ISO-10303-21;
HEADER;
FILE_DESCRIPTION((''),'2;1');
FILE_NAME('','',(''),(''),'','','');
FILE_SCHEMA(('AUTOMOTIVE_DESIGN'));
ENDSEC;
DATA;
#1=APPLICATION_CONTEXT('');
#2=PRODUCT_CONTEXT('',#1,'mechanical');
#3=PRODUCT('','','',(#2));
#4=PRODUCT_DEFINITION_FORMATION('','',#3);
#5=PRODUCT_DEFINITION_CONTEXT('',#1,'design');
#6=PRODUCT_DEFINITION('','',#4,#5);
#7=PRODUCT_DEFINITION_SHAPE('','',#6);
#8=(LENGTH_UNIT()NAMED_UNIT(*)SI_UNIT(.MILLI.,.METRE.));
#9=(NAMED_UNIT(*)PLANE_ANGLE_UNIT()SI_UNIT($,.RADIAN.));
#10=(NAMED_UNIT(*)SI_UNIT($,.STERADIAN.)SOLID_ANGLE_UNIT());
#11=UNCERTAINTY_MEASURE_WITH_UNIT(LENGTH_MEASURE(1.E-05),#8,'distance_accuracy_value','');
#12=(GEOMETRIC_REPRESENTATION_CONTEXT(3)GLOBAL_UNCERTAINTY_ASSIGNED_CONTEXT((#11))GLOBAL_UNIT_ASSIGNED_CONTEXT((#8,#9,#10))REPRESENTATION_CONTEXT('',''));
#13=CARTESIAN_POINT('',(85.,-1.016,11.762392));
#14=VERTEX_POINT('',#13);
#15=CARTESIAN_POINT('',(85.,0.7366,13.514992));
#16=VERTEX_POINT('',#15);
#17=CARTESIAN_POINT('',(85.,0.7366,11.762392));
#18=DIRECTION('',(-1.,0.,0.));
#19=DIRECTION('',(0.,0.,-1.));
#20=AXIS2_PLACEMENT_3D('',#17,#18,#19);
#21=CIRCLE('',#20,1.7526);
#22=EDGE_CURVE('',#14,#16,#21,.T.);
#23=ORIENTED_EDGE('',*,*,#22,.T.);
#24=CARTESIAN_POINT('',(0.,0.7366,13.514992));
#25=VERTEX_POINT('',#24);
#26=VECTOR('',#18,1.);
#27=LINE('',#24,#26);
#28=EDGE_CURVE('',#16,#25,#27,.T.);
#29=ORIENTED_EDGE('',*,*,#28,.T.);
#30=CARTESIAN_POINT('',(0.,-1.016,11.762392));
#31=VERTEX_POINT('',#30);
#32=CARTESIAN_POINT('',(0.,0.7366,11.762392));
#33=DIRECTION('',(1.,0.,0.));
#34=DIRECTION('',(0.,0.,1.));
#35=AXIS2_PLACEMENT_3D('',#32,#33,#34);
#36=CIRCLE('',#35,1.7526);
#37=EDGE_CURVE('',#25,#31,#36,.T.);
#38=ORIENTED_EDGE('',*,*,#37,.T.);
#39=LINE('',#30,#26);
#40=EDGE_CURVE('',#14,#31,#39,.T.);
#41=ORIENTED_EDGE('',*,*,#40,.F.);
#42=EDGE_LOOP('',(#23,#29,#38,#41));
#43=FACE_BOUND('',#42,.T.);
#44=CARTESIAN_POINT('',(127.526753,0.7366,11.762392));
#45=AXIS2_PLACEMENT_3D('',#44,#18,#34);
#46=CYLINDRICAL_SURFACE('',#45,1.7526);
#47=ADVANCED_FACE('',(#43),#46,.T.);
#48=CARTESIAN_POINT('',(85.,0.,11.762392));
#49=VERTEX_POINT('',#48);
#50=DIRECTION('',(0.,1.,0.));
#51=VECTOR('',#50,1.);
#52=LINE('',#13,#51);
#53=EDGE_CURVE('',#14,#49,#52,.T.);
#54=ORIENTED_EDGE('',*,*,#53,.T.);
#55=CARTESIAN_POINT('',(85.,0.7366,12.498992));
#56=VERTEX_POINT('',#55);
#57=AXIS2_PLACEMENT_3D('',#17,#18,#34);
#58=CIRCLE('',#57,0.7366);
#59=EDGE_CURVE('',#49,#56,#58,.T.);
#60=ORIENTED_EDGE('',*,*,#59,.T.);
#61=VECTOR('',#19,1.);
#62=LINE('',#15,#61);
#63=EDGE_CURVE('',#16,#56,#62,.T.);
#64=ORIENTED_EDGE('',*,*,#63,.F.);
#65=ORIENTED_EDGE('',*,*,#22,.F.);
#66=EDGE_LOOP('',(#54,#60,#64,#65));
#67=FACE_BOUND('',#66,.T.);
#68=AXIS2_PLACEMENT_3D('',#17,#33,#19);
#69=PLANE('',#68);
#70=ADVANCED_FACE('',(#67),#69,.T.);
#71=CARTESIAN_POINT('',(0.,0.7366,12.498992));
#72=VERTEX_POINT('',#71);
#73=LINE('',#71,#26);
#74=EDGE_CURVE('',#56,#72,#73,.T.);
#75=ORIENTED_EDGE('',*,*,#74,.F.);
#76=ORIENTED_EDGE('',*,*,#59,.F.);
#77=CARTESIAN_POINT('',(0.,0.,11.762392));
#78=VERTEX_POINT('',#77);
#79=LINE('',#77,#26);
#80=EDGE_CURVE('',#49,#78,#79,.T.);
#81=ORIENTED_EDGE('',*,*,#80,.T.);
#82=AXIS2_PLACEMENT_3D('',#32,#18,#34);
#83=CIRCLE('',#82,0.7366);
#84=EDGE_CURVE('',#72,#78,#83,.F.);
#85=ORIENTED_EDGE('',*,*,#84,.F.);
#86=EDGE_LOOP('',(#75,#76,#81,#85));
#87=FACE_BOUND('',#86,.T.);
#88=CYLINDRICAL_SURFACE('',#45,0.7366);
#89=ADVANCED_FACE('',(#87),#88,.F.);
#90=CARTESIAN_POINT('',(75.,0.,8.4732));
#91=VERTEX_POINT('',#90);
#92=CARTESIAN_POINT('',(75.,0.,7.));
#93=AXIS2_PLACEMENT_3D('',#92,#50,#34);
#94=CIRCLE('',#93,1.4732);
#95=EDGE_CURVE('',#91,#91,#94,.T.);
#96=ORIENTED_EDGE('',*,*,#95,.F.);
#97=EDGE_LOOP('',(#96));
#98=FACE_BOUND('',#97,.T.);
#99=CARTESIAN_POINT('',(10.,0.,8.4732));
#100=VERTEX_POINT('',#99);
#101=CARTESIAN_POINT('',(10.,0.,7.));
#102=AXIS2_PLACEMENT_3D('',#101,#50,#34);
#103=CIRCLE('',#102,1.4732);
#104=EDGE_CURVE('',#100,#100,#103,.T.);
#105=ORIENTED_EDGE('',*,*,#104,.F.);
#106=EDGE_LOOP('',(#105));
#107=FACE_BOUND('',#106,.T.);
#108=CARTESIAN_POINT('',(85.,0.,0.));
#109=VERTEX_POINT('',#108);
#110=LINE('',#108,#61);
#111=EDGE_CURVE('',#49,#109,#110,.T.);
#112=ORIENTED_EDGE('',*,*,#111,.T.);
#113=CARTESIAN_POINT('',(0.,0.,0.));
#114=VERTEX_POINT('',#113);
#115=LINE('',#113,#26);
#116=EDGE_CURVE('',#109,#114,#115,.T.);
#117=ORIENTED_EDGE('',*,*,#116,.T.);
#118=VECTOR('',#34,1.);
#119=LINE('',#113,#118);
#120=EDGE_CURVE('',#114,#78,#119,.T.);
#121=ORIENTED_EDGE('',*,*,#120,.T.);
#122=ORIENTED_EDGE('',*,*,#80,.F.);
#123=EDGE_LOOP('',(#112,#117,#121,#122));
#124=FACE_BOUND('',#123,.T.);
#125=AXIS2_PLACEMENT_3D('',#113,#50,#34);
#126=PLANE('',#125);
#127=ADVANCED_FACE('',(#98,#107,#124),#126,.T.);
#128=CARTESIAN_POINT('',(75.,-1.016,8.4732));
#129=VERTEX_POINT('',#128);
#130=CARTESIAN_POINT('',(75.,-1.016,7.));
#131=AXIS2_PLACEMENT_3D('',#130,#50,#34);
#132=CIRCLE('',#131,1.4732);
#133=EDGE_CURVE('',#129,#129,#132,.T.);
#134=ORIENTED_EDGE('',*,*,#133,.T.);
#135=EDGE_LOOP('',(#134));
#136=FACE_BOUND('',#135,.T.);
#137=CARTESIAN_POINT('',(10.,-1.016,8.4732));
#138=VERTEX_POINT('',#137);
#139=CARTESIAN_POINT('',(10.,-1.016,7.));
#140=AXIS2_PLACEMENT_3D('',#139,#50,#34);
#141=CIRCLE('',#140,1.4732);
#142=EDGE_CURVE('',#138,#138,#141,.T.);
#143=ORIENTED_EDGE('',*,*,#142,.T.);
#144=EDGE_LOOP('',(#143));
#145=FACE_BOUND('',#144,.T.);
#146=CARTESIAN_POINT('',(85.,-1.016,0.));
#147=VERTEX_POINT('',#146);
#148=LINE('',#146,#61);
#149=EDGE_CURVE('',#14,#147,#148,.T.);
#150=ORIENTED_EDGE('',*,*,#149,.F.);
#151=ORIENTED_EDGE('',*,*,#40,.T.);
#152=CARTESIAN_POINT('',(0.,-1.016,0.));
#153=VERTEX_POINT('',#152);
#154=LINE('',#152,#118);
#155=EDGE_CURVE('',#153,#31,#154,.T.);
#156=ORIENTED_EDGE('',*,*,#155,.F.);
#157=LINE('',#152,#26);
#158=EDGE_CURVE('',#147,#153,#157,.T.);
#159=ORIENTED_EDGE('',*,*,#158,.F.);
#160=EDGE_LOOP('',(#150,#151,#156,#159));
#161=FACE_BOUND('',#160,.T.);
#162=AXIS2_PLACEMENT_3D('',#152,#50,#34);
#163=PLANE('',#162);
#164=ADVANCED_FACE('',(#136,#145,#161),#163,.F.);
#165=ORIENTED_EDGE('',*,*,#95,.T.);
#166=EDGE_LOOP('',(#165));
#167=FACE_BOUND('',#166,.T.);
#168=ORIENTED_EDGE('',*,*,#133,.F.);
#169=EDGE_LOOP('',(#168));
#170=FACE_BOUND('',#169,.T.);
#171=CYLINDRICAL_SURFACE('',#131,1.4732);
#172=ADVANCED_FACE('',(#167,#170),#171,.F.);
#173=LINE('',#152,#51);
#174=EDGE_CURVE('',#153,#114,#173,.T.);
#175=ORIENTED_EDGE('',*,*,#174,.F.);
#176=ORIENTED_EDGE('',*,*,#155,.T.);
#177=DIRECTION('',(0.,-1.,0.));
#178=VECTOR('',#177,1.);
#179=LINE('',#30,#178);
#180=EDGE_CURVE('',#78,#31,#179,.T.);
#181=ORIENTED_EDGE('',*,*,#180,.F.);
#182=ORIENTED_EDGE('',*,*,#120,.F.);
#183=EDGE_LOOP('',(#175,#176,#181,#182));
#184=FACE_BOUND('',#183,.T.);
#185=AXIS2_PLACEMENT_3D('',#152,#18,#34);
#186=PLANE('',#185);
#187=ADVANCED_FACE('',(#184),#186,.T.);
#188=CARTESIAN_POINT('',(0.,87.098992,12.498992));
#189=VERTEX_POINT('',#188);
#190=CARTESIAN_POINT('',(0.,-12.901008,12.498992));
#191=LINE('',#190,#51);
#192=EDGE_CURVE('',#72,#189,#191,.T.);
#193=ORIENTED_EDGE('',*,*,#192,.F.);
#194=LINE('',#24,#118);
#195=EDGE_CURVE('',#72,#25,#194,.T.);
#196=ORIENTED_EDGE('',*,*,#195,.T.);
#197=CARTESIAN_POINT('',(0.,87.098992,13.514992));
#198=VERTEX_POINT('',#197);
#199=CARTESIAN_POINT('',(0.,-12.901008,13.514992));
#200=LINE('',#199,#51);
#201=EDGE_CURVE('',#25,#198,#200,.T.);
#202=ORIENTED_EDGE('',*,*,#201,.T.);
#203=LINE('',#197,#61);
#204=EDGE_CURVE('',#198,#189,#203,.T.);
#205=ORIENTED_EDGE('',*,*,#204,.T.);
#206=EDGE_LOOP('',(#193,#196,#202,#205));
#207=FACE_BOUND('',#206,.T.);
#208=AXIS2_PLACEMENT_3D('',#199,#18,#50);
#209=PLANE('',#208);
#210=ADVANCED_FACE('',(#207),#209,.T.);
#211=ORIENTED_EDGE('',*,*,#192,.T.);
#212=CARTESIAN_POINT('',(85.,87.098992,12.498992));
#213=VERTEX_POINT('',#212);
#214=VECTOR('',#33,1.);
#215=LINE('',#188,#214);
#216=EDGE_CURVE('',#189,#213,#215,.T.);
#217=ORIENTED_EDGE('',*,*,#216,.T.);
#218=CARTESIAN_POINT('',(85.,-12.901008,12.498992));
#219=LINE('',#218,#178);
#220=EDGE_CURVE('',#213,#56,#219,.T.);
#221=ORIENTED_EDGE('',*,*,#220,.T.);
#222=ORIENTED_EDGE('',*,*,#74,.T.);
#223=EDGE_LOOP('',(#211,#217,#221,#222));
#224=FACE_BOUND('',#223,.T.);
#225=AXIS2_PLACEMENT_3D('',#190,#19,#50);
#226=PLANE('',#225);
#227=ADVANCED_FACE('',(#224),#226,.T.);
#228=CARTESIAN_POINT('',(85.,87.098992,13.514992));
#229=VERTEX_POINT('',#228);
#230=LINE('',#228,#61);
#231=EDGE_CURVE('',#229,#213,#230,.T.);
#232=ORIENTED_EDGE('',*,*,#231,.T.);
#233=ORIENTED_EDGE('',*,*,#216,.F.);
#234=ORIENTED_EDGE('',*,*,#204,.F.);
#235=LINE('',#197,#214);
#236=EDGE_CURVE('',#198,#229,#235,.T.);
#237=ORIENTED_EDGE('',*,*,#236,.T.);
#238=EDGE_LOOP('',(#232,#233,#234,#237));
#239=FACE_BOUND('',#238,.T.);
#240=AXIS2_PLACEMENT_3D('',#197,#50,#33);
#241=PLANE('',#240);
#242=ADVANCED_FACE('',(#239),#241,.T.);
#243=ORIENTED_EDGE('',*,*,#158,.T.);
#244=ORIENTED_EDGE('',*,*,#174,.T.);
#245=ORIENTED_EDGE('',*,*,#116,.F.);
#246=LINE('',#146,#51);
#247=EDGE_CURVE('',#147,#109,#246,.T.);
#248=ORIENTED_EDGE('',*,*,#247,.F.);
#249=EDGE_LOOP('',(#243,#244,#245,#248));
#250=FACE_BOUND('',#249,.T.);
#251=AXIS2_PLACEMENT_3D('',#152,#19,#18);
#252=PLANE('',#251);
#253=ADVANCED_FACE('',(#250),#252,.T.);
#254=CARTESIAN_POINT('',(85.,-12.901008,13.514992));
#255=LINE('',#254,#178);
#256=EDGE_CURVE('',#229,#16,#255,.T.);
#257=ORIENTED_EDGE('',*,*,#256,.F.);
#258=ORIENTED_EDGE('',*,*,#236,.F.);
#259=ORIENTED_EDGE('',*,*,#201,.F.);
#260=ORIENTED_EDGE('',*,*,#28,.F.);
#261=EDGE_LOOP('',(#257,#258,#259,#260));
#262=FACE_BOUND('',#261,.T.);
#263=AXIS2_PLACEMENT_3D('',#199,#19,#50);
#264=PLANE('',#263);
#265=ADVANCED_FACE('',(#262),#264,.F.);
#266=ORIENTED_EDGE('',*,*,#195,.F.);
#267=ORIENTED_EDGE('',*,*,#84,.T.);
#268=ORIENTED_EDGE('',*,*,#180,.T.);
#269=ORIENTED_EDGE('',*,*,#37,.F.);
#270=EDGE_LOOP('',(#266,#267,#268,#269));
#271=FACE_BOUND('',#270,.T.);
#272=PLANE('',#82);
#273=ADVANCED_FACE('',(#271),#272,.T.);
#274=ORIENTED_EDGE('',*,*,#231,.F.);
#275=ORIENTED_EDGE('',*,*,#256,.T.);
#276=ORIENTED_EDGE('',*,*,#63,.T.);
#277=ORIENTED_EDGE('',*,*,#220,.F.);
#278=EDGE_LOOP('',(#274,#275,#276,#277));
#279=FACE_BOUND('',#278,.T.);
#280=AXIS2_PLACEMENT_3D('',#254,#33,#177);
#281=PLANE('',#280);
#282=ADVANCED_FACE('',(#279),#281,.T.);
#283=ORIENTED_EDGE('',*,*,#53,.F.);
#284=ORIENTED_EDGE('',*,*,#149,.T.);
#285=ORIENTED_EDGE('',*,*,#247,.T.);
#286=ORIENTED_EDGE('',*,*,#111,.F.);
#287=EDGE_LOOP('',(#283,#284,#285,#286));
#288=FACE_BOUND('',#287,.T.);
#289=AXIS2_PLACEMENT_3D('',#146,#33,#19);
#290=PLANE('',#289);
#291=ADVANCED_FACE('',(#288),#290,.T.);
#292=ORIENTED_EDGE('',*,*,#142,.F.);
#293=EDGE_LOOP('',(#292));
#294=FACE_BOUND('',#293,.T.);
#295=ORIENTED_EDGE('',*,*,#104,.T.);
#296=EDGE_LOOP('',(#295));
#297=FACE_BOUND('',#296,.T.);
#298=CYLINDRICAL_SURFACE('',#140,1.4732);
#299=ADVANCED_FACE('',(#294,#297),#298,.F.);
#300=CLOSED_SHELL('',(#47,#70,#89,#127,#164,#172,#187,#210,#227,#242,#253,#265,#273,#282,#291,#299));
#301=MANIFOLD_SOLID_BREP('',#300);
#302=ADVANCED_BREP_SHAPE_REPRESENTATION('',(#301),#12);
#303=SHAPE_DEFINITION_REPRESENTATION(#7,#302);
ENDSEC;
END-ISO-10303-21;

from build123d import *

# Parameters (mm, degrees)
SKETCH1_W              = 85
SKETCH1_H              = 100
SKETCH1_R              = 1.4732
BASE_FLANGE1_DEPTH     = 1.016
SKETCHED_BEND1_DEPTH   = 85
SKETCHED_BEND1_2_DEPTH = 85


# Read off the part's stored shape, not the designer's step: Sketched Bend1
# Sheet-metal steps are written as plain solids
with BuildPart() as part:
    # Sketch1 → Base-Flange1 (new body)
    with BuildSketch(Plane(origin=(0, 0, 0), x_dir=(1, 0, 0), z_dir=(0, 1, 0))):
        with Locations((42.5, -50)):
            Rectangle(SKETCH1_W, SKETCH1_H)
        with Locations(Location((10, -7, 0), (0, 0, 270))):
            Circle(SKETCH1_R, mode=Mode.SUBTRACT)
        with Locations(Location((75, -7, 0), (0, 0, 270))):
            Circle(SKETCH1_R, mode=Mode.SUBTRACT)
    extrude(amount=-BASE_FLANGE1_DEPTH)

    # Sketched Bend1 outline → Sketched Bend1 (cut)
    with BuildSketch(Plane.YZ):
        with BuildLine():
            ThreePointArc((-1.016, 11.762391673), (-0.740317723, 12.705959794), (0, 13.352683218))
            Line((0, 13.352683218), (0, 100))
            Line((0, 100), (-1.016, 100))
            Line((-1.016, 100), (-1.016, 11.762391673))
        make_face()
    extrude(amount=SKETCHED_BEND1_DEPTH, mode=Mode.SUBTRACT)

    # Sketched Bend1 2 outline → Sketched Bend1 2 (add)
    with BuildSketch(Plane.YZ):
        with BuildLine():
            ThreePointArc((0, 11.762391673), (0.215745145, 12.283246528), (0.7366, 12.498991673))
            Line((0.7366, 12.498991673), (87.098991673, 12.498991673))
            Line((87.098991673, 12.498991673), (87.098991673, 13.514991673))
            Line((87.098991673, 13.514991673), (0.7366, 13.514991673))
            ThreePointArc((0.7366, 13.514991673), (0.35946488, 13.473933627), (0, 13.352683218))
            Line((0, 13.352683218), (0, 11.762391673))
        make_face()
    extrude(amount=SKETCHED_BEND1_2_DEPTH)


solid = part.part
